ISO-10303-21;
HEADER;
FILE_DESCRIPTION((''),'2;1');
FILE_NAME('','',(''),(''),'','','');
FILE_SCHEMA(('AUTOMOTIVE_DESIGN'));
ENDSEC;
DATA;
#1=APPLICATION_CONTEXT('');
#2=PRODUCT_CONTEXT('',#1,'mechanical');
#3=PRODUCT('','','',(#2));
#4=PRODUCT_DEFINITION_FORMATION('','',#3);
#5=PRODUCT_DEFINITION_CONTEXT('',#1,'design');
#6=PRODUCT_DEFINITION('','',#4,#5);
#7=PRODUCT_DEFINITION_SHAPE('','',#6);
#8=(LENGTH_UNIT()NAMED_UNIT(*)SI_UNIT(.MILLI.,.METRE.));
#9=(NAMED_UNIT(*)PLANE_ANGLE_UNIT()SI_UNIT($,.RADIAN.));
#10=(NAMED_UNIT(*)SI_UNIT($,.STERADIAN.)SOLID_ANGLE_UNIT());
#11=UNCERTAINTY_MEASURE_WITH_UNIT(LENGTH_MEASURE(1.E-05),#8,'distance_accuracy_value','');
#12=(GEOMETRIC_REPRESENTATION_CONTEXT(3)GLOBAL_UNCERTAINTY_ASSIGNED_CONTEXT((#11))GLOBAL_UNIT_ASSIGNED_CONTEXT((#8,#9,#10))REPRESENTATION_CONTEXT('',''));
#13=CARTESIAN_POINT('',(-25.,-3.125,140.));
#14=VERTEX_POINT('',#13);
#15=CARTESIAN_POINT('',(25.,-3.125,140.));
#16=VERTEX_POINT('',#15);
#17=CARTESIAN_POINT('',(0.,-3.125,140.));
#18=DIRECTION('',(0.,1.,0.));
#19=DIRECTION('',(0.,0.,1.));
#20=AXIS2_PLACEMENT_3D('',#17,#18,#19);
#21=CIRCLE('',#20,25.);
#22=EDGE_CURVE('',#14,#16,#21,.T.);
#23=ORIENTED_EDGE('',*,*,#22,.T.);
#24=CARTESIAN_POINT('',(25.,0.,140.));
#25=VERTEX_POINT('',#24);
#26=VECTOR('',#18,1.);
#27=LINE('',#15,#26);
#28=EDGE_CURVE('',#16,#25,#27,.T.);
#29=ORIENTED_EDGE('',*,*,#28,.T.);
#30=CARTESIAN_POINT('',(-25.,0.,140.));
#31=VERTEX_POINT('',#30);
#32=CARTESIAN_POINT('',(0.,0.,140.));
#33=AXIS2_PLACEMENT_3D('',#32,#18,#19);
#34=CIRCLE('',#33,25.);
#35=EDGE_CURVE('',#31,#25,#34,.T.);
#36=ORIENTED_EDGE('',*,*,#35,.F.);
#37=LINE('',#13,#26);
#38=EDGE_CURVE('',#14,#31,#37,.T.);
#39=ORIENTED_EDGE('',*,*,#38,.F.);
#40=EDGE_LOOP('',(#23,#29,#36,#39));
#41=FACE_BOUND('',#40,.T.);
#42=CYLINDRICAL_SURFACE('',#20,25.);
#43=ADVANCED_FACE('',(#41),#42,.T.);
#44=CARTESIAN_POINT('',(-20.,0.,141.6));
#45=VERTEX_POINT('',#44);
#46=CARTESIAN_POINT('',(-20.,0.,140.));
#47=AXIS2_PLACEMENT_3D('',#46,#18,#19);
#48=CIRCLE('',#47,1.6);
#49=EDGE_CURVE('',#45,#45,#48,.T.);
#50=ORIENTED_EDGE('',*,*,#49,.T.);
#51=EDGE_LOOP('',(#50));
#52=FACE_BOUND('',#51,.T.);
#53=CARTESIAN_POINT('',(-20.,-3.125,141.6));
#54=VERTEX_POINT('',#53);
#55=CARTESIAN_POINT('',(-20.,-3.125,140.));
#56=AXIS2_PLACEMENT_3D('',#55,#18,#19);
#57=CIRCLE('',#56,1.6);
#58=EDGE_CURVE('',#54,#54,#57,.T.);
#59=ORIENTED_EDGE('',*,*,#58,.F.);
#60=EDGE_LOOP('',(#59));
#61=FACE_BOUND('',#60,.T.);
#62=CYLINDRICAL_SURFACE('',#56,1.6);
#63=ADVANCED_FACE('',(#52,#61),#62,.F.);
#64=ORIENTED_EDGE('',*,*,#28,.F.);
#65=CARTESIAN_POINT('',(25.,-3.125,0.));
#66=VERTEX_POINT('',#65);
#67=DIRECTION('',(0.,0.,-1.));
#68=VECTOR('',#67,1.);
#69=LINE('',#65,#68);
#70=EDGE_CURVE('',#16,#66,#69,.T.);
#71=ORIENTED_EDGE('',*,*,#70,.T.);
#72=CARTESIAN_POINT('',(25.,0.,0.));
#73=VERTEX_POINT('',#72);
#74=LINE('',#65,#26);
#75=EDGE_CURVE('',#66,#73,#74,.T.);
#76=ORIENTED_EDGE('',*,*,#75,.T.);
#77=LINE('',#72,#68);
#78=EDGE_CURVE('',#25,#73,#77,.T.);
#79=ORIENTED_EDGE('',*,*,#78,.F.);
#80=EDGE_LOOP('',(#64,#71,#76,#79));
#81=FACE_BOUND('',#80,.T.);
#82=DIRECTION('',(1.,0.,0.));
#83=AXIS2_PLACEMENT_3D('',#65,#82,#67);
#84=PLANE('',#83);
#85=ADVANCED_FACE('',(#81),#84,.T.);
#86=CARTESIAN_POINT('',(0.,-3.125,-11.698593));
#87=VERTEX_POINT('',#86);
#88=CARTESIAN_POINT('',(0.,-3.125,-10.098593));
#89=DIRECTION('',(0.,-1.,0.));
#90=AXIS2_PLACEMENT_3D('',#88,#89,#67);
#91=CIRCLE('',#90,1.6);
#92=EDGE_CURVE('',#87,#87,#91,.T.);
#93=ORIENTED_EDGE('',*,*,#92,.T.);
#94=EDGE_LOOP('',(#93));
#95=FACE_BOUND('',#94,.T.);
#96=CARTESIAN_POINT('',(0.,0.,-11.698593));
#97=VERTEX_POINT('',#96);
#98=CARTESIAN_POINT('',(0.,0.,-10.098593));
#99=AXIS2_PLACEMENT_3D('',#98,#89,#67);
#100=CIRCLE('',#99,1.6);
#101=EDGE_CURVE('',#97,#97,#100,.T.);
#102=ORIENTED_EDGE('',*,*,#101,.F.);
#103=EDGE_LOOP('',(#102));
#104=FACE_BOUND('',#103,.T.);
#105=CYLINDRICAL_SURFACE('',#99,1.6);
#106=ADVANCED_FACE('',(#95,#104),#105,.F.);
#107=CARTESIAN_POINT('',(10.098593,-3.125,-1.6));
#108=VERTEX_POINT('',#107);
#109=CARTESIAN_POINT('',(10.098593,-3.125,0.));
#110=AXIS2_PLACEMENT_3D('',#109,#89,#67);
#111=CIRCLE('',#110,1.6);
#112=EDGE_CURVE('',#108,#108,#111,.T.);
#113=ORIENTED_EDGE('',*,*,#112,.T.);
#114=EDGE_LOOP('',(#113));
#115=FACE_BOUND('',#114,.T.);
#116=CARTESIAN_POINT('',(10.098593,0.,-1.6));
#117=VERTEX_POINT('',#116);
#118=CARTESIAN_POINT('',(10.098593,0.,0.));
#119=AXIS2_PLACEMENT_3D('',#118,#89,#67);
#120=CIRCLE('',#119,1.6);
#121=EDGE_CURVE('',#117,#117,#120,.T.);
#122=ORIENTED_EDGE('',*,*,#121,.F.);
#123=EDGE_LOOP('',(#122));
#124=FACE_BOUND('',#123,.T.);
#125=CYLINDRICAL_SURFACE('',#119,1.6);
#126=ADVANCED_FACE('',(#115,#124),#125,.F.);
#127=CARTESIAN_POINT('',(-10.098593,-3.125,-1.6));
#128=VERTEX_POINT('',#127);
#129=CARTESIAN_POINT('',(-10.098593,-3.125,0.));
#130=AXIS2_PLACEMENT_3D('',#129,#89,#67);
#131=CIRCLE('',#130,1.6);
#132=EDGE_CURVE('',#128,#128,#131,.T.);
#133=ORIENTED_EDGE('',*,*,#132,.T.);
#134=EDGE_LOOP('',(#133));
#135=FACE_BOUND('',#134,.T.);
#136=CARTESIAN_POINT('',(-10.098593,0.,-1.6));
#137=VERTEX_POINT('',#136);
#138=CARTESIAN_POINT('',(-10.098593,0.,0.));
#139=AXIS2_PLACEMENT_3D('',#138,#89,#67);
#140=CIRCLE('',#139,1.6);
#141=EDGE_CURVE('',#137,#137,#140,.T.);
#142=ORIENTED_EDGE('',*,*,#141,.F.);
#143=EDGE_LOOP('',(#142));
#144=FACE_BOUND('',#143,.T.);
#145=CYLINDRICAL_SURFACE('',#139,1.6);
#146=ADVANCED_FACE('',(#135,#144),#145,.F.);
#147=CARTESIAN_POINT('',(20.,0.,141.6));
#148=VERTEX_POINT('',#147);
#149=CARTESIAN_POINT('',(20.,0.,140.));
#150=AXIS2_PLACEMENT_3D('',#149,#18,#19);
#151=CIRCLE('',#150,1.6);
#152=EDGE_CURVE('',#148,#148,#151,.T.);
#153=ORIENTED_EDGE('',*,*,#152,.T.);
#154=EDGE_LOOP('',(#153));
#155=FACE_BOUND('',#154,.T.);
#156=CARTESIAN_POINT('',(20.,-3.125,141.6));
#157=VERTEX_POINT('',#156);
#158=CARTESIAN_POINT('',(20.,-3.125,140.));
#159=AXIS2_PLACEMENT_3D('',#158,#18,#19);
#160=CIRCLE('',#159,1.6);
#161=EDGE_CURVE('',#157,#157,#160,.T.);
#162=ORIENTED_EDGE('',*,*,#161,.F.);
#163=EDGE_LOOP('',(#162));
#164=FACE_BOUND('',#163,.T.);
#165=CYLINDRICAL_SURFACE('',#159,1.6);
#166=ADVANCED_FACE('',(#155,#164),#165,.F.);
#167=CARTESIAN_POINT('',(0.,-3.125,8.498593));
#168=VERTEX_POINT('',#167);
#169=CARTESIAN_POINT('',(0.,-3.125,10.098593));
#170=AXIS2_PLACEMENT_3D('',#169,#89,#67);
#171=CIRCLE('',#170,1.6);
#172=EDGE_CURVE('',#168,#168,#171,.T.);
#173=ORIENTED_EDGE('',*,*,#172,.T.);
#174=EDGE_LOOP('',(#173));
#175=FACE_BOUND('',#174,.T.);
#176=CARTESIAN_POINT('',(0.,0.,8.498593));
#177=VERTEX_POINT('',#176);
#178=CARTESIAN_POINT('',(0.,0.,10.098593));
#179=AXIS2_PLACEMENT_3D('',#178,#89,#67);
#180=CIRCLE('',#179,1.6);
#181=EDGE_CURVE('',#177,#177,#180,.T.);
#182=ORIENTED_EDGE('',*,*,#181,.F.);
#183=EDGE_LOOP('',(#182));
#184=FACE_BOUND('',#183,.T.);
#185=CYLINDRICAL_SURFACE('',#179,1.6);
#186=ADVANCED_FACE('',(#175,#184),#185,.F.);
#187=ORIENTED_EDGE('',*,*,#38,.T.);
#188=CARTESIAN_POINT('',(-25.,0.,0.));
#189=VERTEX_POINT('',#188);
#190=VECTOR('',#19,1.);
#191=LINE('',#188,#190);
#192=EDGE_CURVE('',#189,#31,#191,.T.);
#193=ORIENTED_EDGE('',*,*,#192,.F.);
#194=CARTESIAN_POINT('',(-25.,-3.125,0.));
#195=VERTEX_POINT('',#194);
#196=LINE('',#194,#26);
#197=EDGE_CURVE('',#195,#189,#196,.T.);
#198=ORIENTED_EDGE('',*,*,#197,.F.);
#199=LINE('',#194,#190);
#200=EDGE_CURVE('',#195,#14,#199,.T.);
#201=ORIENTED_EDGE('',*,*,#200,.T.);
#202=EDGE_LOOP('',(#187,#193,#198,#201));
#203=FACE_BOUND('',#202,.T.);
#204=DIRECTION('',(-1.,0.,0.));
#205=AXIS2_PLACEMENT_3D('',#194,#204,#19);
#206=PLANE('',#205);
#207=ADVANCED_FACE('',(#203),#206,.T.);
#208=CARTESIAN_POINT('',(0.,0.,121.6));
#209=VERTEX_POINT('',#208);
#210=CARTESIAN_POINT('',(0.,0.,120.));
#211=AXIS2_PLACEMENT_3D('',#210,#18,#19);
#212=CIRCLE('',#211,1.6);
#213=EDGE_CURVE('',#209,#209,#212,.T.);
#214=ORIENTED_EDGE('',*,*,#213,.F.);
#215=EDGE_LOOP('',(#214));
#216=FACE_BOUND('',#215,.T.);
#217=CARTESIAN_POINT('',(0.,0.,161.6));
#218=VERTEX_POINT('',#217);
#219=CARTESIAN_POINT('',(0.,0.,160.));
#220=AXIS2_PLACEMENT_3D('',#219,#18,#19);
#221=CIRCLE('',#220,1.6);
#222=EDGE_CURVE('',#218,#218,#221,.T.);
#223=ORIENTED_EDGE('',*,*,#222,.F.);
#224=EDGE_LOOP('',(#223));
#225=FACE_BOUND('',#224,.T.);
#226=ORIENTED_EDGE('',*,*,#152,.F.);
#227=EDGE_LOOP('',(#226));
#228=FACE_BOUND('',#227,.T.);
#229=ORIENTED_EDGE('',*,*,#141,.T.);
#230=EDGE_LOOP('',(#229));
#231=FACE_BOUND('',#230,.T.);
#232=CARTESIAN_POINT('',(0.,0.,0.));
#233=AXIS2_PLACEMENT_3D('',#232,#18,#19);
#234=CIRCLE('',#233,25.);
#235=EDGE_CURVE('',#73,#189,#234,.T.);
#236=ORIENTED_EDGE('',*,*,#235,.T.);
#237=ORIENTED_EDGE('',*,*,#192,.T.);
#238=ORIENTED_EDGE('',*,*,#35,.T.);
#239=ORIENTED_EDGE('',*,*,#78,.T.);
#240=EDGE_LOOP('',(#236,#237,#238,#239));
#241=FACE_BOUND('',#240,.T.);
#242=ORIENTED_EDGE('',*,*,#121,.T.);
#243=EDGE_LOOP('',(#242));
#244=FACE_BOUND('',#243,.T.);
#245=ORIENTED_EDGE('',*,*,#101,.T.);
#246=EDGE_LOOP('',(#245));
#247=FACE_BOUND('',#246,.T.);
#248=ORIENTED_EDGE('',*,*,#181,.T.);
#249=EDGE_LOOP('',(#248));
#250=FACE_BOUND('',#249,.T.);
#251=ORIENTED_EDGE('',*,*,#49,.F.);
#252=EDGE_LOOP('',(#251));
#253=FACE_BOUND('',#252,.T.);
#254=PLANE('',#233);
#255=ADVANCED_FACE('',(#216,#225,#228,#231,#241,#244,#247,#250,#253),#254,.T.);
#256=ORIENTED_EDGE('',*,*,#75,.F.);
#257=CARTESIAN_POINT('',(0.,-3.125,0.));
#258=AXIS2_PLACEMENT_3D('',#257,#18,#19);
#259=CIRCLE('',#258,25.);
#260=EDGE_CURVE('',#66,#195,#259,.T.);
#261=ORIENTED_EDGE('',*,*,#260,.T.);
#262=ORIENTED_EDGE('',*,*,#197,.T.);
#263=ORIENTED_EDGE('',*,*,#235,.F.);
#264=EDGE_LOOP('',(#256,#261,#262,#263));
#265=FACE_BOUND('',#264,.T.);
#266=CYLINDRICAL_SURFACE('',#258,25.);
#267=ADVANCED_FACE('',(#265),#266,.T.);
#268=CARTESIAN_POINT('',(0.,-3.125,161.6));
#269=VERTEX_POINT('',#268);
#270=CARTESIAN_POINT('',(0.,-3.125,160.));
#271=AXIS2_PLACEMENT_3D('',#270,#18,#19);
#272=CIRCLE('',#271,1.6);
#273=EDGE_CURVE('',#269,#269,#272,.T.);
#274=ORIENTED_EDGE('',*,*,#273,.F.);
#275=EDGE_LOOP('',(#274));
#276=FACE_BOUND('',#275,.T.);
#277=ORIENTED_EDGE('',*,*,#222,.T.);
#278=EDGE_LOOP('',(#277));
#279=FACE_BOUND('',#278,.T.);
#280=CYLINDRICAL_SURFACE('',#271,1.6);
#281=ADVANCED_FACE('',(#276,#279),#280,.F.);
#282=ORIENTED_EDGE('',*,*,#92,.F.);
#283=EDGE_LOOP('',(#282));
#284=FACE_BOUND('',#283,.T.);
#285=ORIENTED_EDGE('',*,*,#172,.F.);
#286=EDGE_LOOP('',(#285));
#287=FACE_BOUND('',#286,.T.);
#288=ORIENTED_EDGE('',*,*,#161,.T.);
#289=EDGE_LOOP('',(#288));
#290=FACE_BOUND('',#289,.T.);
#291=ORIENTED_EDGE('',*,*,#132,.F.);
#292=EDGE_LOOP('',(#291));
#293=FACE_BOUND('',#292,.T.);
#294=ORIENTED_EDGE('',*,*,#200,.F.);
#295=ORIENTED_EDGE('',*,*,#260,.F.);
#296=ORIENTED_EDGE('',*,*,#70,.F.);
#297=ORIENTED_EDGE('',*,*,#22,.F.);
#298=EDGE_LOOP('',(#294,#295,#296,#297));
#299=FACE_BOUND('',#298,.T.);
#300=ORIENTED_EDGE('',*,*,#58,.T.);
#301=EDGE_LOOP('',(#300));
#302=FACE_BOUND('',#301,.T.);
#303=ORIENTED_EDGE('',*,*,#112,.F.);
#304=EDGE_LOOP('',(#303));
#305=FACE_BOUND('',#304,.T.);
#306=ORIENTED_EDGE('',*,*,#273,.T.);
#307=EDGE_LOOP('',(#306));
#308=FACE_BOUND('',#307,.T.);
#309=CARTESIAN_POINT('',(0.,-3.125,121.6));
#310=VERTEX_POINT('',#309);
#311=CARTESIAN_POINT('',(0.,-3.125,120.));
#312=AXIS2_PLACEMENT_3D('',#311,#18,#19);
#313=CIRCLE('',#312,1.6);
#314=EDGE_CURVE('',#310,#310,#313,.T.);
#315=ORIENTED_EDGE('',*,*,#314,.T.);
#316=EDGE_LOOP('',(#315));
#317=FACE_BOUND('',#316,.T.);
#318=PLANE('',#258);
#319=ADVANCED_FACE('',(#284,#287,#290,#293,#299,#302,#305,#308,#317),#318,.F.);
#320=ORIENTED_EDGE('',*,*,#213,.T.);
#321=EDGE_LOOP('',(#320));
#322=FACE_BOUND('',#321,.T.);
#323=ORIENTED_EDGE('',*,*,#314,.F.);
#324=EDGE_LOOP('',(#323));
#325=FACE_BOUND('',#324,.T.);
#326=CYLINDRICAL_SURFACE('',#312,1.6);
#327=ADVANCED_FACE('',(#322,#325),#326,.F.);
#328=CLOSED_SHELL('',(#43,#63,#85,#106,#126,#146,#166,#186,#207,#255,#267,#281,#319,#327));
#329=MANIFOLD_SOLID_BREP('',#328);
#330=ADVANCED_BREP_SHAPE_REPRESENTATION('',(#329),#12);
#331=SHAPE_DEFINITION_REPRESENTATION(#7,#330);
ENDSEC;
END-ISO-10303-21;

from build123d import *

# Parameters (mm, degrees)
BASE_FLANGE1_DEPTH = 3.125
SKETCH4_R          = 1.6
CUT_EXTRUDE1_DEPTH = 167.912448981
SKETCH6_R          = 1.6
CUT_EXTRUDE3_DEPTH = 167.912448981


# Sheet-metal steps are written as plain solids
with BuildPart() as part:
    # Sketch1 → Base-Flange1 (new body)
    with BuildSketch(Plane(origin=(0, 0, 0), x_dir=(1, 0, 0), z_dir=(0, 1, 0))):
        with BuildLine():
            Line((-25, 0), (-25, -140))
            ThreePointArc((-25, -140), (0, -165), (25, -140))
            Line((25, -140), (25, 0))
            ThreePointArc((25, 0), (0, 25), (-25, 0))
        make_face()
    extrude(amount=-BASE_FLANGE1_DEPTH)

    # Sketch4 → Cut-Extrude1 (cut, through all)
    with BuildSketch(Plane.XZ.offset(3.125)):
        with Locations(Location((0, -10.098593171, 0), (0, 0, 270))):
            Circle(SKETCH4_R)
        with Locations(Location((10.098593171, 0, 0), (0, 0, 270))):
            Circle(SKETCH4_R)
        with Locations(Location((-10.098593171, 0, 0), (0, 0, 270))):
            Circle(SKETCH4_R)
        with Locations(Location((0, 10.098593171, 0), (0, 0, 270))):
            Circle(SKETCH4_R)
    extrude(amount=-CUT_EXTRUDE1_DEPTH, mode=Mode.SUBTRACT)

    # Sketch6 → Cut-Extrude3 (cut, through all)
    with BuildSketch(Plane(origin=(0, 0, 0), x_dir=(1, 0, 0), z_dir=(0, 1, 0))):
        with Locations(Location((0, -120, 0), (0, 0, 270))):
            Circle(SKETCH6_R)
        with Locations(Location((-20, -140, 0), (0, 0, 270))):
            Circle(SKETCH6_R)
        with Locations(Location((0, -160, 0), (0, 0, 270))):
            Circle(SKETCH6_R)
        with Locations(Location((20, -140, 0), (0, 0, 270))):
            Circle(SKETCH6_R)
    extrude(amount=-CUT_EXTRUDE3_DEPTH, mode=Mode.SUBTRACT)


solid = part.part
